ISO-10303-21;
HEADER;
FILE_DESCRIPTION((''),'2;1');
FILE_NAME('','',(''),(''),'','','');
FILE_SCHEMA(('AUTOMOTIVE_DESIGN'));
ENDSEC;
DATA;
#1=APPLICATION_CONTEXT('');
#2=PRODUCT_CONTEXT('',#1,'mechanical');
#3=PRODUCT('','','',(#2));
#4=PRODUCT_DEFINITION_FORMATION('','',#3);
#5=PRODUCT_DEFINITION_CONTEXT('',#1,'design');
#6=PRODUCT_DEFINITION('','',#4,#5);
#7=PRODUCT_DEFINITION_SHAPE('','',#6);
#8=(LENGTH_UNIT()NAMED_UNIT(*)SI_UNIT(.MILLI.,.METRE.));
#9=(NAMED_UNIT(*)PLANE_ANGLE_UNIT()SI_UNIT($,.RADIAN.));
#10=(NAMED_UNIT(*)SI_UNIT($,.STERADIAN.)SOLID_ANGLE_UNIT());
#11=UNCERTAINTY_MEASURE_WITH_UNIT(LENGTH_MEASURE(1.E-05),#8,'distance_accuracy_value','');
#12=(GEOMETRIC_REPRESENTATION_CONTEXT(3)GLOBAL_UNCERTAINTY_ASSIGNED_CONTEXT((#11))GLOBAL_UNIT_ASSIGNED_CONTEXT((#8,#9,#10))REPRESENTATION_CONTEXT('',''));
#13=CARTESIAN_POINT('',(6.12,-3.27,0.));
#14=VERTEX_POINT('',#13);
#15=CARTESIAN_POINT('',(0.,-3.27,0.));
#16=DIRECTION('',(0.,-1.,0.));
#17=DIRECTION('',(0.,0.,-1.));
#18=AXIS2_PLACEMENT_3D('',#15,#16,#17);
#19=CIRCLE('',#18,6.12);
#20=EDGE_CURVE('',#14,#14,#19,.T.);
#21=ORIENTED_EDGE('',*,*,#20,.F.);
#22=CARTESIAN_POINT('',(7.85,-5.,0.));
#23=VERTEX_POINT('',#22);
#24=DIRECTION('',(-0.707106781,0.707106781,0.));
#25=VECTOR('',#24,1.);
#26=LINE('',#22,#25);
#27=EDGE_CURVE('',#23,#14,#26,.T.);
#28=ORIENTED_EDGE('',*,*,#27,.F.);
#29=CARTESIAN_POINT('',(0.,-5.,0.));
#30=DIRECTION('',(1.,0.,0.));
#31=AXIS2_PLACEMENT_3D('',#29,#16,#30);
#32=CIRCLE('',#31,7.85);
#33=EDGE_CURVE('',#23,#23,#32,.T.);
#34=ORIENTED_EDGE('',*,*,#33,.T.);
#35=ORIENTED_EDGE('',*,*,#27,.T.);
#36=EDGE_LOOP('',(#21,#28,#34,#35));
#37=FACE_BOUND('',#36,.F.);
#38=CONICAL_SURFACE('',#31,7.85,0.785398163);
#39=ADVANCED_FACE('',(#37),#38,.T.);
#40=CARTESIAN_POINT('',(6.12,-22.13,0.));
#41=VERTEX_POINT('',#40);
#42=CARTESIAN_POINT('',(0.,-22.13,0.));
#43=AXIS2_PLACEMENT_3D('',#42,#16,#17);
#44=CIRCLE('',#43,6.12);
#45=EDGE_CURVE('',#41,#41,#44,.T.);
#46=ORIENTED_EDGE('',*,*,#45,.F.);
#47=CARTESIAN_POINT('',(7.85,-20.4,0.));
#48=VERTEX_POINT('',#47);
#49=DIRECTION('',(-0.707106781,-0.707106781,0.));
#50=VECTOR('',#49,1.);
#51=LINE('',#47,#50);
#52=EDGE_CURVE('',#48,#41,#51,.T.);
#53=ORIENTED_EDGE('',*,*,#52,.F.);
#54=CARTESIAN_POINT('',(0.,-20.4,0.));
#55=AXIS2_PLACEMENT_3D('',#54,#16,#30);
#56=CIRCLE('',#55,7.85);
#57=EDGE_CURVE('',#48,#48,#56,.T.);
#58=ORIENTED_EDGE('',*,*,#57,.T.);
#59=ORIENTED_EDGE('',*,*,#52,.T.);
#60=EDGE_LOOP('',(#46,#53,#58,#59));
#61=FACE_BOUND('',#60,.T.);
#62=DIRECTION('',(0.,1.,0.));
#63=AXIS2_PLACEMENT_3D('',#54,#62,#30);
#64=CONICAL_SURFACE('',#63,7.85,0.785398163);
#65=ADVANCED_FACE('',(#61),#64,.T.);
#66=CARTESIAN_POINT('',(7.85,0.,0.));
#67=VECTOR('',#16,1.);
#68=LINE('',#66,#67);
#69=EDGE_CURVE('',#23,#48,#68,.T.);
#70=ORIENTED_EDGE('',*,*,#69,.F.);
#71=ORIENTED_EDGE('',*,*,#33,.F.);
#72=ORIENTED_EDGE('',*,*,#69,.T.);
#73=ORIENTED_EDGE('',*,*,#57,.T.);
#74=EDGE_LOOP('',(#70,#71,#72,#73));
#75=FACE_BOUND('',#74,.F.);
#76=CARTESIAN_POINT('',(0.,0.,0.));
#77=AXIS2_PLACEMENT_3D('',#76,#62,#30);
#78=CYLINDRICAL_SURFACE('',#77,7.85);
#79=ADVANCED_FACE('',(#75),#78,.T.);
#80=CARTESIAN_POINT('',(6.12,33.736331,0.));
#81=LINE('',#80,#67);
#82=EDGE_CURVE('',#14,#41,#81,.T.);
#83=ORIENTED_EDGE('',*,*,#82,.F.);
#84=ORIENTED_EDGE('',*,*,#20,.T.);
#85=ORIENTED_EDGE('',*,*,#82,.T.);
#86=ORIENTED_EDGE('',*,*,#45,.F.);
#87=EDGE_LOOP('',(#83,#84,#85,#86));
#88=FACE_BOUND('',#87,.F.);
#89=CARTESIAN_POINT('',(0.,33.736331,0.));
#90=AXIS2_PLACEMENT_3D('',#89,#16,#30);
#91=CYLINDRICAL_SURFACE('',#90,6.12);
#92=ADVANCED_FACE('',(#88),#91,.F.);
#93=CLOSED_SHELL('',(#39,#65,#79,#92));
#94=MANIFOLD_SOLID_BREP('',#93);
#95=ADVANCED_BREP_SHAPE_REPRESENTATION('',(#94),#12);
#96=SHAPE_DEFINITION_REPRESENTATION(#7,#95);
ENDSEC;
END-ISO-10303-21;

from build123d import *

# Parameters (mm, degrees)
F0_R     = 7.85
F1_DEPTH = 25.4
F3_D     = 12.24


# Not quite as in the source:
# - a fillet or chamfer that OpenCascade refuses, or shapes differently, is made with other operations: its cross-section is extruded or revolved along the edge and cut away or added


with BuildPart() as f1:
    # F0 (on Front) → F1 (new body)
    with BuildSketch(Plane.XZ):
        Circle(F0_R)
    extrude(amount=F1_DEPTH)

    # F3 (through all)
    with Locations(Plane(origin=(0, 0, 0), x_dir=(-1, 0, 0), z_dir=(0, 1, 0))):
        with Locations((0, 0)):
            Hole(F3_D / 2)

    # F4: chamfer of 5 on 1 edges, made by hand

    # F4_s1 → F4_t2 (revolve, cut)
    with BuildSketch(Plane.XY):
        Polygon((7.85, -5), (2.85, 0), (7.85, 0), align=None)
    revolve(axis=Axis((0, 0, 0), (0, -1, 0)), mode=Mode.SUBTRACT)

    # F5: chamfer of 5 on 1 edges, made by hand

    # F5_s1 → F5_t2 (revolve, cut)
    with BuildSketch(Plane.XY):
        Polygon((7.85, -20.4), (2.85, -25.4), (7.85, -25.4), align=None)
    revolve(axis=Axis((0, -25.4, 0), (0, -1, 0)), mode=Mode.SUBTRACT)


solid = f1.part
